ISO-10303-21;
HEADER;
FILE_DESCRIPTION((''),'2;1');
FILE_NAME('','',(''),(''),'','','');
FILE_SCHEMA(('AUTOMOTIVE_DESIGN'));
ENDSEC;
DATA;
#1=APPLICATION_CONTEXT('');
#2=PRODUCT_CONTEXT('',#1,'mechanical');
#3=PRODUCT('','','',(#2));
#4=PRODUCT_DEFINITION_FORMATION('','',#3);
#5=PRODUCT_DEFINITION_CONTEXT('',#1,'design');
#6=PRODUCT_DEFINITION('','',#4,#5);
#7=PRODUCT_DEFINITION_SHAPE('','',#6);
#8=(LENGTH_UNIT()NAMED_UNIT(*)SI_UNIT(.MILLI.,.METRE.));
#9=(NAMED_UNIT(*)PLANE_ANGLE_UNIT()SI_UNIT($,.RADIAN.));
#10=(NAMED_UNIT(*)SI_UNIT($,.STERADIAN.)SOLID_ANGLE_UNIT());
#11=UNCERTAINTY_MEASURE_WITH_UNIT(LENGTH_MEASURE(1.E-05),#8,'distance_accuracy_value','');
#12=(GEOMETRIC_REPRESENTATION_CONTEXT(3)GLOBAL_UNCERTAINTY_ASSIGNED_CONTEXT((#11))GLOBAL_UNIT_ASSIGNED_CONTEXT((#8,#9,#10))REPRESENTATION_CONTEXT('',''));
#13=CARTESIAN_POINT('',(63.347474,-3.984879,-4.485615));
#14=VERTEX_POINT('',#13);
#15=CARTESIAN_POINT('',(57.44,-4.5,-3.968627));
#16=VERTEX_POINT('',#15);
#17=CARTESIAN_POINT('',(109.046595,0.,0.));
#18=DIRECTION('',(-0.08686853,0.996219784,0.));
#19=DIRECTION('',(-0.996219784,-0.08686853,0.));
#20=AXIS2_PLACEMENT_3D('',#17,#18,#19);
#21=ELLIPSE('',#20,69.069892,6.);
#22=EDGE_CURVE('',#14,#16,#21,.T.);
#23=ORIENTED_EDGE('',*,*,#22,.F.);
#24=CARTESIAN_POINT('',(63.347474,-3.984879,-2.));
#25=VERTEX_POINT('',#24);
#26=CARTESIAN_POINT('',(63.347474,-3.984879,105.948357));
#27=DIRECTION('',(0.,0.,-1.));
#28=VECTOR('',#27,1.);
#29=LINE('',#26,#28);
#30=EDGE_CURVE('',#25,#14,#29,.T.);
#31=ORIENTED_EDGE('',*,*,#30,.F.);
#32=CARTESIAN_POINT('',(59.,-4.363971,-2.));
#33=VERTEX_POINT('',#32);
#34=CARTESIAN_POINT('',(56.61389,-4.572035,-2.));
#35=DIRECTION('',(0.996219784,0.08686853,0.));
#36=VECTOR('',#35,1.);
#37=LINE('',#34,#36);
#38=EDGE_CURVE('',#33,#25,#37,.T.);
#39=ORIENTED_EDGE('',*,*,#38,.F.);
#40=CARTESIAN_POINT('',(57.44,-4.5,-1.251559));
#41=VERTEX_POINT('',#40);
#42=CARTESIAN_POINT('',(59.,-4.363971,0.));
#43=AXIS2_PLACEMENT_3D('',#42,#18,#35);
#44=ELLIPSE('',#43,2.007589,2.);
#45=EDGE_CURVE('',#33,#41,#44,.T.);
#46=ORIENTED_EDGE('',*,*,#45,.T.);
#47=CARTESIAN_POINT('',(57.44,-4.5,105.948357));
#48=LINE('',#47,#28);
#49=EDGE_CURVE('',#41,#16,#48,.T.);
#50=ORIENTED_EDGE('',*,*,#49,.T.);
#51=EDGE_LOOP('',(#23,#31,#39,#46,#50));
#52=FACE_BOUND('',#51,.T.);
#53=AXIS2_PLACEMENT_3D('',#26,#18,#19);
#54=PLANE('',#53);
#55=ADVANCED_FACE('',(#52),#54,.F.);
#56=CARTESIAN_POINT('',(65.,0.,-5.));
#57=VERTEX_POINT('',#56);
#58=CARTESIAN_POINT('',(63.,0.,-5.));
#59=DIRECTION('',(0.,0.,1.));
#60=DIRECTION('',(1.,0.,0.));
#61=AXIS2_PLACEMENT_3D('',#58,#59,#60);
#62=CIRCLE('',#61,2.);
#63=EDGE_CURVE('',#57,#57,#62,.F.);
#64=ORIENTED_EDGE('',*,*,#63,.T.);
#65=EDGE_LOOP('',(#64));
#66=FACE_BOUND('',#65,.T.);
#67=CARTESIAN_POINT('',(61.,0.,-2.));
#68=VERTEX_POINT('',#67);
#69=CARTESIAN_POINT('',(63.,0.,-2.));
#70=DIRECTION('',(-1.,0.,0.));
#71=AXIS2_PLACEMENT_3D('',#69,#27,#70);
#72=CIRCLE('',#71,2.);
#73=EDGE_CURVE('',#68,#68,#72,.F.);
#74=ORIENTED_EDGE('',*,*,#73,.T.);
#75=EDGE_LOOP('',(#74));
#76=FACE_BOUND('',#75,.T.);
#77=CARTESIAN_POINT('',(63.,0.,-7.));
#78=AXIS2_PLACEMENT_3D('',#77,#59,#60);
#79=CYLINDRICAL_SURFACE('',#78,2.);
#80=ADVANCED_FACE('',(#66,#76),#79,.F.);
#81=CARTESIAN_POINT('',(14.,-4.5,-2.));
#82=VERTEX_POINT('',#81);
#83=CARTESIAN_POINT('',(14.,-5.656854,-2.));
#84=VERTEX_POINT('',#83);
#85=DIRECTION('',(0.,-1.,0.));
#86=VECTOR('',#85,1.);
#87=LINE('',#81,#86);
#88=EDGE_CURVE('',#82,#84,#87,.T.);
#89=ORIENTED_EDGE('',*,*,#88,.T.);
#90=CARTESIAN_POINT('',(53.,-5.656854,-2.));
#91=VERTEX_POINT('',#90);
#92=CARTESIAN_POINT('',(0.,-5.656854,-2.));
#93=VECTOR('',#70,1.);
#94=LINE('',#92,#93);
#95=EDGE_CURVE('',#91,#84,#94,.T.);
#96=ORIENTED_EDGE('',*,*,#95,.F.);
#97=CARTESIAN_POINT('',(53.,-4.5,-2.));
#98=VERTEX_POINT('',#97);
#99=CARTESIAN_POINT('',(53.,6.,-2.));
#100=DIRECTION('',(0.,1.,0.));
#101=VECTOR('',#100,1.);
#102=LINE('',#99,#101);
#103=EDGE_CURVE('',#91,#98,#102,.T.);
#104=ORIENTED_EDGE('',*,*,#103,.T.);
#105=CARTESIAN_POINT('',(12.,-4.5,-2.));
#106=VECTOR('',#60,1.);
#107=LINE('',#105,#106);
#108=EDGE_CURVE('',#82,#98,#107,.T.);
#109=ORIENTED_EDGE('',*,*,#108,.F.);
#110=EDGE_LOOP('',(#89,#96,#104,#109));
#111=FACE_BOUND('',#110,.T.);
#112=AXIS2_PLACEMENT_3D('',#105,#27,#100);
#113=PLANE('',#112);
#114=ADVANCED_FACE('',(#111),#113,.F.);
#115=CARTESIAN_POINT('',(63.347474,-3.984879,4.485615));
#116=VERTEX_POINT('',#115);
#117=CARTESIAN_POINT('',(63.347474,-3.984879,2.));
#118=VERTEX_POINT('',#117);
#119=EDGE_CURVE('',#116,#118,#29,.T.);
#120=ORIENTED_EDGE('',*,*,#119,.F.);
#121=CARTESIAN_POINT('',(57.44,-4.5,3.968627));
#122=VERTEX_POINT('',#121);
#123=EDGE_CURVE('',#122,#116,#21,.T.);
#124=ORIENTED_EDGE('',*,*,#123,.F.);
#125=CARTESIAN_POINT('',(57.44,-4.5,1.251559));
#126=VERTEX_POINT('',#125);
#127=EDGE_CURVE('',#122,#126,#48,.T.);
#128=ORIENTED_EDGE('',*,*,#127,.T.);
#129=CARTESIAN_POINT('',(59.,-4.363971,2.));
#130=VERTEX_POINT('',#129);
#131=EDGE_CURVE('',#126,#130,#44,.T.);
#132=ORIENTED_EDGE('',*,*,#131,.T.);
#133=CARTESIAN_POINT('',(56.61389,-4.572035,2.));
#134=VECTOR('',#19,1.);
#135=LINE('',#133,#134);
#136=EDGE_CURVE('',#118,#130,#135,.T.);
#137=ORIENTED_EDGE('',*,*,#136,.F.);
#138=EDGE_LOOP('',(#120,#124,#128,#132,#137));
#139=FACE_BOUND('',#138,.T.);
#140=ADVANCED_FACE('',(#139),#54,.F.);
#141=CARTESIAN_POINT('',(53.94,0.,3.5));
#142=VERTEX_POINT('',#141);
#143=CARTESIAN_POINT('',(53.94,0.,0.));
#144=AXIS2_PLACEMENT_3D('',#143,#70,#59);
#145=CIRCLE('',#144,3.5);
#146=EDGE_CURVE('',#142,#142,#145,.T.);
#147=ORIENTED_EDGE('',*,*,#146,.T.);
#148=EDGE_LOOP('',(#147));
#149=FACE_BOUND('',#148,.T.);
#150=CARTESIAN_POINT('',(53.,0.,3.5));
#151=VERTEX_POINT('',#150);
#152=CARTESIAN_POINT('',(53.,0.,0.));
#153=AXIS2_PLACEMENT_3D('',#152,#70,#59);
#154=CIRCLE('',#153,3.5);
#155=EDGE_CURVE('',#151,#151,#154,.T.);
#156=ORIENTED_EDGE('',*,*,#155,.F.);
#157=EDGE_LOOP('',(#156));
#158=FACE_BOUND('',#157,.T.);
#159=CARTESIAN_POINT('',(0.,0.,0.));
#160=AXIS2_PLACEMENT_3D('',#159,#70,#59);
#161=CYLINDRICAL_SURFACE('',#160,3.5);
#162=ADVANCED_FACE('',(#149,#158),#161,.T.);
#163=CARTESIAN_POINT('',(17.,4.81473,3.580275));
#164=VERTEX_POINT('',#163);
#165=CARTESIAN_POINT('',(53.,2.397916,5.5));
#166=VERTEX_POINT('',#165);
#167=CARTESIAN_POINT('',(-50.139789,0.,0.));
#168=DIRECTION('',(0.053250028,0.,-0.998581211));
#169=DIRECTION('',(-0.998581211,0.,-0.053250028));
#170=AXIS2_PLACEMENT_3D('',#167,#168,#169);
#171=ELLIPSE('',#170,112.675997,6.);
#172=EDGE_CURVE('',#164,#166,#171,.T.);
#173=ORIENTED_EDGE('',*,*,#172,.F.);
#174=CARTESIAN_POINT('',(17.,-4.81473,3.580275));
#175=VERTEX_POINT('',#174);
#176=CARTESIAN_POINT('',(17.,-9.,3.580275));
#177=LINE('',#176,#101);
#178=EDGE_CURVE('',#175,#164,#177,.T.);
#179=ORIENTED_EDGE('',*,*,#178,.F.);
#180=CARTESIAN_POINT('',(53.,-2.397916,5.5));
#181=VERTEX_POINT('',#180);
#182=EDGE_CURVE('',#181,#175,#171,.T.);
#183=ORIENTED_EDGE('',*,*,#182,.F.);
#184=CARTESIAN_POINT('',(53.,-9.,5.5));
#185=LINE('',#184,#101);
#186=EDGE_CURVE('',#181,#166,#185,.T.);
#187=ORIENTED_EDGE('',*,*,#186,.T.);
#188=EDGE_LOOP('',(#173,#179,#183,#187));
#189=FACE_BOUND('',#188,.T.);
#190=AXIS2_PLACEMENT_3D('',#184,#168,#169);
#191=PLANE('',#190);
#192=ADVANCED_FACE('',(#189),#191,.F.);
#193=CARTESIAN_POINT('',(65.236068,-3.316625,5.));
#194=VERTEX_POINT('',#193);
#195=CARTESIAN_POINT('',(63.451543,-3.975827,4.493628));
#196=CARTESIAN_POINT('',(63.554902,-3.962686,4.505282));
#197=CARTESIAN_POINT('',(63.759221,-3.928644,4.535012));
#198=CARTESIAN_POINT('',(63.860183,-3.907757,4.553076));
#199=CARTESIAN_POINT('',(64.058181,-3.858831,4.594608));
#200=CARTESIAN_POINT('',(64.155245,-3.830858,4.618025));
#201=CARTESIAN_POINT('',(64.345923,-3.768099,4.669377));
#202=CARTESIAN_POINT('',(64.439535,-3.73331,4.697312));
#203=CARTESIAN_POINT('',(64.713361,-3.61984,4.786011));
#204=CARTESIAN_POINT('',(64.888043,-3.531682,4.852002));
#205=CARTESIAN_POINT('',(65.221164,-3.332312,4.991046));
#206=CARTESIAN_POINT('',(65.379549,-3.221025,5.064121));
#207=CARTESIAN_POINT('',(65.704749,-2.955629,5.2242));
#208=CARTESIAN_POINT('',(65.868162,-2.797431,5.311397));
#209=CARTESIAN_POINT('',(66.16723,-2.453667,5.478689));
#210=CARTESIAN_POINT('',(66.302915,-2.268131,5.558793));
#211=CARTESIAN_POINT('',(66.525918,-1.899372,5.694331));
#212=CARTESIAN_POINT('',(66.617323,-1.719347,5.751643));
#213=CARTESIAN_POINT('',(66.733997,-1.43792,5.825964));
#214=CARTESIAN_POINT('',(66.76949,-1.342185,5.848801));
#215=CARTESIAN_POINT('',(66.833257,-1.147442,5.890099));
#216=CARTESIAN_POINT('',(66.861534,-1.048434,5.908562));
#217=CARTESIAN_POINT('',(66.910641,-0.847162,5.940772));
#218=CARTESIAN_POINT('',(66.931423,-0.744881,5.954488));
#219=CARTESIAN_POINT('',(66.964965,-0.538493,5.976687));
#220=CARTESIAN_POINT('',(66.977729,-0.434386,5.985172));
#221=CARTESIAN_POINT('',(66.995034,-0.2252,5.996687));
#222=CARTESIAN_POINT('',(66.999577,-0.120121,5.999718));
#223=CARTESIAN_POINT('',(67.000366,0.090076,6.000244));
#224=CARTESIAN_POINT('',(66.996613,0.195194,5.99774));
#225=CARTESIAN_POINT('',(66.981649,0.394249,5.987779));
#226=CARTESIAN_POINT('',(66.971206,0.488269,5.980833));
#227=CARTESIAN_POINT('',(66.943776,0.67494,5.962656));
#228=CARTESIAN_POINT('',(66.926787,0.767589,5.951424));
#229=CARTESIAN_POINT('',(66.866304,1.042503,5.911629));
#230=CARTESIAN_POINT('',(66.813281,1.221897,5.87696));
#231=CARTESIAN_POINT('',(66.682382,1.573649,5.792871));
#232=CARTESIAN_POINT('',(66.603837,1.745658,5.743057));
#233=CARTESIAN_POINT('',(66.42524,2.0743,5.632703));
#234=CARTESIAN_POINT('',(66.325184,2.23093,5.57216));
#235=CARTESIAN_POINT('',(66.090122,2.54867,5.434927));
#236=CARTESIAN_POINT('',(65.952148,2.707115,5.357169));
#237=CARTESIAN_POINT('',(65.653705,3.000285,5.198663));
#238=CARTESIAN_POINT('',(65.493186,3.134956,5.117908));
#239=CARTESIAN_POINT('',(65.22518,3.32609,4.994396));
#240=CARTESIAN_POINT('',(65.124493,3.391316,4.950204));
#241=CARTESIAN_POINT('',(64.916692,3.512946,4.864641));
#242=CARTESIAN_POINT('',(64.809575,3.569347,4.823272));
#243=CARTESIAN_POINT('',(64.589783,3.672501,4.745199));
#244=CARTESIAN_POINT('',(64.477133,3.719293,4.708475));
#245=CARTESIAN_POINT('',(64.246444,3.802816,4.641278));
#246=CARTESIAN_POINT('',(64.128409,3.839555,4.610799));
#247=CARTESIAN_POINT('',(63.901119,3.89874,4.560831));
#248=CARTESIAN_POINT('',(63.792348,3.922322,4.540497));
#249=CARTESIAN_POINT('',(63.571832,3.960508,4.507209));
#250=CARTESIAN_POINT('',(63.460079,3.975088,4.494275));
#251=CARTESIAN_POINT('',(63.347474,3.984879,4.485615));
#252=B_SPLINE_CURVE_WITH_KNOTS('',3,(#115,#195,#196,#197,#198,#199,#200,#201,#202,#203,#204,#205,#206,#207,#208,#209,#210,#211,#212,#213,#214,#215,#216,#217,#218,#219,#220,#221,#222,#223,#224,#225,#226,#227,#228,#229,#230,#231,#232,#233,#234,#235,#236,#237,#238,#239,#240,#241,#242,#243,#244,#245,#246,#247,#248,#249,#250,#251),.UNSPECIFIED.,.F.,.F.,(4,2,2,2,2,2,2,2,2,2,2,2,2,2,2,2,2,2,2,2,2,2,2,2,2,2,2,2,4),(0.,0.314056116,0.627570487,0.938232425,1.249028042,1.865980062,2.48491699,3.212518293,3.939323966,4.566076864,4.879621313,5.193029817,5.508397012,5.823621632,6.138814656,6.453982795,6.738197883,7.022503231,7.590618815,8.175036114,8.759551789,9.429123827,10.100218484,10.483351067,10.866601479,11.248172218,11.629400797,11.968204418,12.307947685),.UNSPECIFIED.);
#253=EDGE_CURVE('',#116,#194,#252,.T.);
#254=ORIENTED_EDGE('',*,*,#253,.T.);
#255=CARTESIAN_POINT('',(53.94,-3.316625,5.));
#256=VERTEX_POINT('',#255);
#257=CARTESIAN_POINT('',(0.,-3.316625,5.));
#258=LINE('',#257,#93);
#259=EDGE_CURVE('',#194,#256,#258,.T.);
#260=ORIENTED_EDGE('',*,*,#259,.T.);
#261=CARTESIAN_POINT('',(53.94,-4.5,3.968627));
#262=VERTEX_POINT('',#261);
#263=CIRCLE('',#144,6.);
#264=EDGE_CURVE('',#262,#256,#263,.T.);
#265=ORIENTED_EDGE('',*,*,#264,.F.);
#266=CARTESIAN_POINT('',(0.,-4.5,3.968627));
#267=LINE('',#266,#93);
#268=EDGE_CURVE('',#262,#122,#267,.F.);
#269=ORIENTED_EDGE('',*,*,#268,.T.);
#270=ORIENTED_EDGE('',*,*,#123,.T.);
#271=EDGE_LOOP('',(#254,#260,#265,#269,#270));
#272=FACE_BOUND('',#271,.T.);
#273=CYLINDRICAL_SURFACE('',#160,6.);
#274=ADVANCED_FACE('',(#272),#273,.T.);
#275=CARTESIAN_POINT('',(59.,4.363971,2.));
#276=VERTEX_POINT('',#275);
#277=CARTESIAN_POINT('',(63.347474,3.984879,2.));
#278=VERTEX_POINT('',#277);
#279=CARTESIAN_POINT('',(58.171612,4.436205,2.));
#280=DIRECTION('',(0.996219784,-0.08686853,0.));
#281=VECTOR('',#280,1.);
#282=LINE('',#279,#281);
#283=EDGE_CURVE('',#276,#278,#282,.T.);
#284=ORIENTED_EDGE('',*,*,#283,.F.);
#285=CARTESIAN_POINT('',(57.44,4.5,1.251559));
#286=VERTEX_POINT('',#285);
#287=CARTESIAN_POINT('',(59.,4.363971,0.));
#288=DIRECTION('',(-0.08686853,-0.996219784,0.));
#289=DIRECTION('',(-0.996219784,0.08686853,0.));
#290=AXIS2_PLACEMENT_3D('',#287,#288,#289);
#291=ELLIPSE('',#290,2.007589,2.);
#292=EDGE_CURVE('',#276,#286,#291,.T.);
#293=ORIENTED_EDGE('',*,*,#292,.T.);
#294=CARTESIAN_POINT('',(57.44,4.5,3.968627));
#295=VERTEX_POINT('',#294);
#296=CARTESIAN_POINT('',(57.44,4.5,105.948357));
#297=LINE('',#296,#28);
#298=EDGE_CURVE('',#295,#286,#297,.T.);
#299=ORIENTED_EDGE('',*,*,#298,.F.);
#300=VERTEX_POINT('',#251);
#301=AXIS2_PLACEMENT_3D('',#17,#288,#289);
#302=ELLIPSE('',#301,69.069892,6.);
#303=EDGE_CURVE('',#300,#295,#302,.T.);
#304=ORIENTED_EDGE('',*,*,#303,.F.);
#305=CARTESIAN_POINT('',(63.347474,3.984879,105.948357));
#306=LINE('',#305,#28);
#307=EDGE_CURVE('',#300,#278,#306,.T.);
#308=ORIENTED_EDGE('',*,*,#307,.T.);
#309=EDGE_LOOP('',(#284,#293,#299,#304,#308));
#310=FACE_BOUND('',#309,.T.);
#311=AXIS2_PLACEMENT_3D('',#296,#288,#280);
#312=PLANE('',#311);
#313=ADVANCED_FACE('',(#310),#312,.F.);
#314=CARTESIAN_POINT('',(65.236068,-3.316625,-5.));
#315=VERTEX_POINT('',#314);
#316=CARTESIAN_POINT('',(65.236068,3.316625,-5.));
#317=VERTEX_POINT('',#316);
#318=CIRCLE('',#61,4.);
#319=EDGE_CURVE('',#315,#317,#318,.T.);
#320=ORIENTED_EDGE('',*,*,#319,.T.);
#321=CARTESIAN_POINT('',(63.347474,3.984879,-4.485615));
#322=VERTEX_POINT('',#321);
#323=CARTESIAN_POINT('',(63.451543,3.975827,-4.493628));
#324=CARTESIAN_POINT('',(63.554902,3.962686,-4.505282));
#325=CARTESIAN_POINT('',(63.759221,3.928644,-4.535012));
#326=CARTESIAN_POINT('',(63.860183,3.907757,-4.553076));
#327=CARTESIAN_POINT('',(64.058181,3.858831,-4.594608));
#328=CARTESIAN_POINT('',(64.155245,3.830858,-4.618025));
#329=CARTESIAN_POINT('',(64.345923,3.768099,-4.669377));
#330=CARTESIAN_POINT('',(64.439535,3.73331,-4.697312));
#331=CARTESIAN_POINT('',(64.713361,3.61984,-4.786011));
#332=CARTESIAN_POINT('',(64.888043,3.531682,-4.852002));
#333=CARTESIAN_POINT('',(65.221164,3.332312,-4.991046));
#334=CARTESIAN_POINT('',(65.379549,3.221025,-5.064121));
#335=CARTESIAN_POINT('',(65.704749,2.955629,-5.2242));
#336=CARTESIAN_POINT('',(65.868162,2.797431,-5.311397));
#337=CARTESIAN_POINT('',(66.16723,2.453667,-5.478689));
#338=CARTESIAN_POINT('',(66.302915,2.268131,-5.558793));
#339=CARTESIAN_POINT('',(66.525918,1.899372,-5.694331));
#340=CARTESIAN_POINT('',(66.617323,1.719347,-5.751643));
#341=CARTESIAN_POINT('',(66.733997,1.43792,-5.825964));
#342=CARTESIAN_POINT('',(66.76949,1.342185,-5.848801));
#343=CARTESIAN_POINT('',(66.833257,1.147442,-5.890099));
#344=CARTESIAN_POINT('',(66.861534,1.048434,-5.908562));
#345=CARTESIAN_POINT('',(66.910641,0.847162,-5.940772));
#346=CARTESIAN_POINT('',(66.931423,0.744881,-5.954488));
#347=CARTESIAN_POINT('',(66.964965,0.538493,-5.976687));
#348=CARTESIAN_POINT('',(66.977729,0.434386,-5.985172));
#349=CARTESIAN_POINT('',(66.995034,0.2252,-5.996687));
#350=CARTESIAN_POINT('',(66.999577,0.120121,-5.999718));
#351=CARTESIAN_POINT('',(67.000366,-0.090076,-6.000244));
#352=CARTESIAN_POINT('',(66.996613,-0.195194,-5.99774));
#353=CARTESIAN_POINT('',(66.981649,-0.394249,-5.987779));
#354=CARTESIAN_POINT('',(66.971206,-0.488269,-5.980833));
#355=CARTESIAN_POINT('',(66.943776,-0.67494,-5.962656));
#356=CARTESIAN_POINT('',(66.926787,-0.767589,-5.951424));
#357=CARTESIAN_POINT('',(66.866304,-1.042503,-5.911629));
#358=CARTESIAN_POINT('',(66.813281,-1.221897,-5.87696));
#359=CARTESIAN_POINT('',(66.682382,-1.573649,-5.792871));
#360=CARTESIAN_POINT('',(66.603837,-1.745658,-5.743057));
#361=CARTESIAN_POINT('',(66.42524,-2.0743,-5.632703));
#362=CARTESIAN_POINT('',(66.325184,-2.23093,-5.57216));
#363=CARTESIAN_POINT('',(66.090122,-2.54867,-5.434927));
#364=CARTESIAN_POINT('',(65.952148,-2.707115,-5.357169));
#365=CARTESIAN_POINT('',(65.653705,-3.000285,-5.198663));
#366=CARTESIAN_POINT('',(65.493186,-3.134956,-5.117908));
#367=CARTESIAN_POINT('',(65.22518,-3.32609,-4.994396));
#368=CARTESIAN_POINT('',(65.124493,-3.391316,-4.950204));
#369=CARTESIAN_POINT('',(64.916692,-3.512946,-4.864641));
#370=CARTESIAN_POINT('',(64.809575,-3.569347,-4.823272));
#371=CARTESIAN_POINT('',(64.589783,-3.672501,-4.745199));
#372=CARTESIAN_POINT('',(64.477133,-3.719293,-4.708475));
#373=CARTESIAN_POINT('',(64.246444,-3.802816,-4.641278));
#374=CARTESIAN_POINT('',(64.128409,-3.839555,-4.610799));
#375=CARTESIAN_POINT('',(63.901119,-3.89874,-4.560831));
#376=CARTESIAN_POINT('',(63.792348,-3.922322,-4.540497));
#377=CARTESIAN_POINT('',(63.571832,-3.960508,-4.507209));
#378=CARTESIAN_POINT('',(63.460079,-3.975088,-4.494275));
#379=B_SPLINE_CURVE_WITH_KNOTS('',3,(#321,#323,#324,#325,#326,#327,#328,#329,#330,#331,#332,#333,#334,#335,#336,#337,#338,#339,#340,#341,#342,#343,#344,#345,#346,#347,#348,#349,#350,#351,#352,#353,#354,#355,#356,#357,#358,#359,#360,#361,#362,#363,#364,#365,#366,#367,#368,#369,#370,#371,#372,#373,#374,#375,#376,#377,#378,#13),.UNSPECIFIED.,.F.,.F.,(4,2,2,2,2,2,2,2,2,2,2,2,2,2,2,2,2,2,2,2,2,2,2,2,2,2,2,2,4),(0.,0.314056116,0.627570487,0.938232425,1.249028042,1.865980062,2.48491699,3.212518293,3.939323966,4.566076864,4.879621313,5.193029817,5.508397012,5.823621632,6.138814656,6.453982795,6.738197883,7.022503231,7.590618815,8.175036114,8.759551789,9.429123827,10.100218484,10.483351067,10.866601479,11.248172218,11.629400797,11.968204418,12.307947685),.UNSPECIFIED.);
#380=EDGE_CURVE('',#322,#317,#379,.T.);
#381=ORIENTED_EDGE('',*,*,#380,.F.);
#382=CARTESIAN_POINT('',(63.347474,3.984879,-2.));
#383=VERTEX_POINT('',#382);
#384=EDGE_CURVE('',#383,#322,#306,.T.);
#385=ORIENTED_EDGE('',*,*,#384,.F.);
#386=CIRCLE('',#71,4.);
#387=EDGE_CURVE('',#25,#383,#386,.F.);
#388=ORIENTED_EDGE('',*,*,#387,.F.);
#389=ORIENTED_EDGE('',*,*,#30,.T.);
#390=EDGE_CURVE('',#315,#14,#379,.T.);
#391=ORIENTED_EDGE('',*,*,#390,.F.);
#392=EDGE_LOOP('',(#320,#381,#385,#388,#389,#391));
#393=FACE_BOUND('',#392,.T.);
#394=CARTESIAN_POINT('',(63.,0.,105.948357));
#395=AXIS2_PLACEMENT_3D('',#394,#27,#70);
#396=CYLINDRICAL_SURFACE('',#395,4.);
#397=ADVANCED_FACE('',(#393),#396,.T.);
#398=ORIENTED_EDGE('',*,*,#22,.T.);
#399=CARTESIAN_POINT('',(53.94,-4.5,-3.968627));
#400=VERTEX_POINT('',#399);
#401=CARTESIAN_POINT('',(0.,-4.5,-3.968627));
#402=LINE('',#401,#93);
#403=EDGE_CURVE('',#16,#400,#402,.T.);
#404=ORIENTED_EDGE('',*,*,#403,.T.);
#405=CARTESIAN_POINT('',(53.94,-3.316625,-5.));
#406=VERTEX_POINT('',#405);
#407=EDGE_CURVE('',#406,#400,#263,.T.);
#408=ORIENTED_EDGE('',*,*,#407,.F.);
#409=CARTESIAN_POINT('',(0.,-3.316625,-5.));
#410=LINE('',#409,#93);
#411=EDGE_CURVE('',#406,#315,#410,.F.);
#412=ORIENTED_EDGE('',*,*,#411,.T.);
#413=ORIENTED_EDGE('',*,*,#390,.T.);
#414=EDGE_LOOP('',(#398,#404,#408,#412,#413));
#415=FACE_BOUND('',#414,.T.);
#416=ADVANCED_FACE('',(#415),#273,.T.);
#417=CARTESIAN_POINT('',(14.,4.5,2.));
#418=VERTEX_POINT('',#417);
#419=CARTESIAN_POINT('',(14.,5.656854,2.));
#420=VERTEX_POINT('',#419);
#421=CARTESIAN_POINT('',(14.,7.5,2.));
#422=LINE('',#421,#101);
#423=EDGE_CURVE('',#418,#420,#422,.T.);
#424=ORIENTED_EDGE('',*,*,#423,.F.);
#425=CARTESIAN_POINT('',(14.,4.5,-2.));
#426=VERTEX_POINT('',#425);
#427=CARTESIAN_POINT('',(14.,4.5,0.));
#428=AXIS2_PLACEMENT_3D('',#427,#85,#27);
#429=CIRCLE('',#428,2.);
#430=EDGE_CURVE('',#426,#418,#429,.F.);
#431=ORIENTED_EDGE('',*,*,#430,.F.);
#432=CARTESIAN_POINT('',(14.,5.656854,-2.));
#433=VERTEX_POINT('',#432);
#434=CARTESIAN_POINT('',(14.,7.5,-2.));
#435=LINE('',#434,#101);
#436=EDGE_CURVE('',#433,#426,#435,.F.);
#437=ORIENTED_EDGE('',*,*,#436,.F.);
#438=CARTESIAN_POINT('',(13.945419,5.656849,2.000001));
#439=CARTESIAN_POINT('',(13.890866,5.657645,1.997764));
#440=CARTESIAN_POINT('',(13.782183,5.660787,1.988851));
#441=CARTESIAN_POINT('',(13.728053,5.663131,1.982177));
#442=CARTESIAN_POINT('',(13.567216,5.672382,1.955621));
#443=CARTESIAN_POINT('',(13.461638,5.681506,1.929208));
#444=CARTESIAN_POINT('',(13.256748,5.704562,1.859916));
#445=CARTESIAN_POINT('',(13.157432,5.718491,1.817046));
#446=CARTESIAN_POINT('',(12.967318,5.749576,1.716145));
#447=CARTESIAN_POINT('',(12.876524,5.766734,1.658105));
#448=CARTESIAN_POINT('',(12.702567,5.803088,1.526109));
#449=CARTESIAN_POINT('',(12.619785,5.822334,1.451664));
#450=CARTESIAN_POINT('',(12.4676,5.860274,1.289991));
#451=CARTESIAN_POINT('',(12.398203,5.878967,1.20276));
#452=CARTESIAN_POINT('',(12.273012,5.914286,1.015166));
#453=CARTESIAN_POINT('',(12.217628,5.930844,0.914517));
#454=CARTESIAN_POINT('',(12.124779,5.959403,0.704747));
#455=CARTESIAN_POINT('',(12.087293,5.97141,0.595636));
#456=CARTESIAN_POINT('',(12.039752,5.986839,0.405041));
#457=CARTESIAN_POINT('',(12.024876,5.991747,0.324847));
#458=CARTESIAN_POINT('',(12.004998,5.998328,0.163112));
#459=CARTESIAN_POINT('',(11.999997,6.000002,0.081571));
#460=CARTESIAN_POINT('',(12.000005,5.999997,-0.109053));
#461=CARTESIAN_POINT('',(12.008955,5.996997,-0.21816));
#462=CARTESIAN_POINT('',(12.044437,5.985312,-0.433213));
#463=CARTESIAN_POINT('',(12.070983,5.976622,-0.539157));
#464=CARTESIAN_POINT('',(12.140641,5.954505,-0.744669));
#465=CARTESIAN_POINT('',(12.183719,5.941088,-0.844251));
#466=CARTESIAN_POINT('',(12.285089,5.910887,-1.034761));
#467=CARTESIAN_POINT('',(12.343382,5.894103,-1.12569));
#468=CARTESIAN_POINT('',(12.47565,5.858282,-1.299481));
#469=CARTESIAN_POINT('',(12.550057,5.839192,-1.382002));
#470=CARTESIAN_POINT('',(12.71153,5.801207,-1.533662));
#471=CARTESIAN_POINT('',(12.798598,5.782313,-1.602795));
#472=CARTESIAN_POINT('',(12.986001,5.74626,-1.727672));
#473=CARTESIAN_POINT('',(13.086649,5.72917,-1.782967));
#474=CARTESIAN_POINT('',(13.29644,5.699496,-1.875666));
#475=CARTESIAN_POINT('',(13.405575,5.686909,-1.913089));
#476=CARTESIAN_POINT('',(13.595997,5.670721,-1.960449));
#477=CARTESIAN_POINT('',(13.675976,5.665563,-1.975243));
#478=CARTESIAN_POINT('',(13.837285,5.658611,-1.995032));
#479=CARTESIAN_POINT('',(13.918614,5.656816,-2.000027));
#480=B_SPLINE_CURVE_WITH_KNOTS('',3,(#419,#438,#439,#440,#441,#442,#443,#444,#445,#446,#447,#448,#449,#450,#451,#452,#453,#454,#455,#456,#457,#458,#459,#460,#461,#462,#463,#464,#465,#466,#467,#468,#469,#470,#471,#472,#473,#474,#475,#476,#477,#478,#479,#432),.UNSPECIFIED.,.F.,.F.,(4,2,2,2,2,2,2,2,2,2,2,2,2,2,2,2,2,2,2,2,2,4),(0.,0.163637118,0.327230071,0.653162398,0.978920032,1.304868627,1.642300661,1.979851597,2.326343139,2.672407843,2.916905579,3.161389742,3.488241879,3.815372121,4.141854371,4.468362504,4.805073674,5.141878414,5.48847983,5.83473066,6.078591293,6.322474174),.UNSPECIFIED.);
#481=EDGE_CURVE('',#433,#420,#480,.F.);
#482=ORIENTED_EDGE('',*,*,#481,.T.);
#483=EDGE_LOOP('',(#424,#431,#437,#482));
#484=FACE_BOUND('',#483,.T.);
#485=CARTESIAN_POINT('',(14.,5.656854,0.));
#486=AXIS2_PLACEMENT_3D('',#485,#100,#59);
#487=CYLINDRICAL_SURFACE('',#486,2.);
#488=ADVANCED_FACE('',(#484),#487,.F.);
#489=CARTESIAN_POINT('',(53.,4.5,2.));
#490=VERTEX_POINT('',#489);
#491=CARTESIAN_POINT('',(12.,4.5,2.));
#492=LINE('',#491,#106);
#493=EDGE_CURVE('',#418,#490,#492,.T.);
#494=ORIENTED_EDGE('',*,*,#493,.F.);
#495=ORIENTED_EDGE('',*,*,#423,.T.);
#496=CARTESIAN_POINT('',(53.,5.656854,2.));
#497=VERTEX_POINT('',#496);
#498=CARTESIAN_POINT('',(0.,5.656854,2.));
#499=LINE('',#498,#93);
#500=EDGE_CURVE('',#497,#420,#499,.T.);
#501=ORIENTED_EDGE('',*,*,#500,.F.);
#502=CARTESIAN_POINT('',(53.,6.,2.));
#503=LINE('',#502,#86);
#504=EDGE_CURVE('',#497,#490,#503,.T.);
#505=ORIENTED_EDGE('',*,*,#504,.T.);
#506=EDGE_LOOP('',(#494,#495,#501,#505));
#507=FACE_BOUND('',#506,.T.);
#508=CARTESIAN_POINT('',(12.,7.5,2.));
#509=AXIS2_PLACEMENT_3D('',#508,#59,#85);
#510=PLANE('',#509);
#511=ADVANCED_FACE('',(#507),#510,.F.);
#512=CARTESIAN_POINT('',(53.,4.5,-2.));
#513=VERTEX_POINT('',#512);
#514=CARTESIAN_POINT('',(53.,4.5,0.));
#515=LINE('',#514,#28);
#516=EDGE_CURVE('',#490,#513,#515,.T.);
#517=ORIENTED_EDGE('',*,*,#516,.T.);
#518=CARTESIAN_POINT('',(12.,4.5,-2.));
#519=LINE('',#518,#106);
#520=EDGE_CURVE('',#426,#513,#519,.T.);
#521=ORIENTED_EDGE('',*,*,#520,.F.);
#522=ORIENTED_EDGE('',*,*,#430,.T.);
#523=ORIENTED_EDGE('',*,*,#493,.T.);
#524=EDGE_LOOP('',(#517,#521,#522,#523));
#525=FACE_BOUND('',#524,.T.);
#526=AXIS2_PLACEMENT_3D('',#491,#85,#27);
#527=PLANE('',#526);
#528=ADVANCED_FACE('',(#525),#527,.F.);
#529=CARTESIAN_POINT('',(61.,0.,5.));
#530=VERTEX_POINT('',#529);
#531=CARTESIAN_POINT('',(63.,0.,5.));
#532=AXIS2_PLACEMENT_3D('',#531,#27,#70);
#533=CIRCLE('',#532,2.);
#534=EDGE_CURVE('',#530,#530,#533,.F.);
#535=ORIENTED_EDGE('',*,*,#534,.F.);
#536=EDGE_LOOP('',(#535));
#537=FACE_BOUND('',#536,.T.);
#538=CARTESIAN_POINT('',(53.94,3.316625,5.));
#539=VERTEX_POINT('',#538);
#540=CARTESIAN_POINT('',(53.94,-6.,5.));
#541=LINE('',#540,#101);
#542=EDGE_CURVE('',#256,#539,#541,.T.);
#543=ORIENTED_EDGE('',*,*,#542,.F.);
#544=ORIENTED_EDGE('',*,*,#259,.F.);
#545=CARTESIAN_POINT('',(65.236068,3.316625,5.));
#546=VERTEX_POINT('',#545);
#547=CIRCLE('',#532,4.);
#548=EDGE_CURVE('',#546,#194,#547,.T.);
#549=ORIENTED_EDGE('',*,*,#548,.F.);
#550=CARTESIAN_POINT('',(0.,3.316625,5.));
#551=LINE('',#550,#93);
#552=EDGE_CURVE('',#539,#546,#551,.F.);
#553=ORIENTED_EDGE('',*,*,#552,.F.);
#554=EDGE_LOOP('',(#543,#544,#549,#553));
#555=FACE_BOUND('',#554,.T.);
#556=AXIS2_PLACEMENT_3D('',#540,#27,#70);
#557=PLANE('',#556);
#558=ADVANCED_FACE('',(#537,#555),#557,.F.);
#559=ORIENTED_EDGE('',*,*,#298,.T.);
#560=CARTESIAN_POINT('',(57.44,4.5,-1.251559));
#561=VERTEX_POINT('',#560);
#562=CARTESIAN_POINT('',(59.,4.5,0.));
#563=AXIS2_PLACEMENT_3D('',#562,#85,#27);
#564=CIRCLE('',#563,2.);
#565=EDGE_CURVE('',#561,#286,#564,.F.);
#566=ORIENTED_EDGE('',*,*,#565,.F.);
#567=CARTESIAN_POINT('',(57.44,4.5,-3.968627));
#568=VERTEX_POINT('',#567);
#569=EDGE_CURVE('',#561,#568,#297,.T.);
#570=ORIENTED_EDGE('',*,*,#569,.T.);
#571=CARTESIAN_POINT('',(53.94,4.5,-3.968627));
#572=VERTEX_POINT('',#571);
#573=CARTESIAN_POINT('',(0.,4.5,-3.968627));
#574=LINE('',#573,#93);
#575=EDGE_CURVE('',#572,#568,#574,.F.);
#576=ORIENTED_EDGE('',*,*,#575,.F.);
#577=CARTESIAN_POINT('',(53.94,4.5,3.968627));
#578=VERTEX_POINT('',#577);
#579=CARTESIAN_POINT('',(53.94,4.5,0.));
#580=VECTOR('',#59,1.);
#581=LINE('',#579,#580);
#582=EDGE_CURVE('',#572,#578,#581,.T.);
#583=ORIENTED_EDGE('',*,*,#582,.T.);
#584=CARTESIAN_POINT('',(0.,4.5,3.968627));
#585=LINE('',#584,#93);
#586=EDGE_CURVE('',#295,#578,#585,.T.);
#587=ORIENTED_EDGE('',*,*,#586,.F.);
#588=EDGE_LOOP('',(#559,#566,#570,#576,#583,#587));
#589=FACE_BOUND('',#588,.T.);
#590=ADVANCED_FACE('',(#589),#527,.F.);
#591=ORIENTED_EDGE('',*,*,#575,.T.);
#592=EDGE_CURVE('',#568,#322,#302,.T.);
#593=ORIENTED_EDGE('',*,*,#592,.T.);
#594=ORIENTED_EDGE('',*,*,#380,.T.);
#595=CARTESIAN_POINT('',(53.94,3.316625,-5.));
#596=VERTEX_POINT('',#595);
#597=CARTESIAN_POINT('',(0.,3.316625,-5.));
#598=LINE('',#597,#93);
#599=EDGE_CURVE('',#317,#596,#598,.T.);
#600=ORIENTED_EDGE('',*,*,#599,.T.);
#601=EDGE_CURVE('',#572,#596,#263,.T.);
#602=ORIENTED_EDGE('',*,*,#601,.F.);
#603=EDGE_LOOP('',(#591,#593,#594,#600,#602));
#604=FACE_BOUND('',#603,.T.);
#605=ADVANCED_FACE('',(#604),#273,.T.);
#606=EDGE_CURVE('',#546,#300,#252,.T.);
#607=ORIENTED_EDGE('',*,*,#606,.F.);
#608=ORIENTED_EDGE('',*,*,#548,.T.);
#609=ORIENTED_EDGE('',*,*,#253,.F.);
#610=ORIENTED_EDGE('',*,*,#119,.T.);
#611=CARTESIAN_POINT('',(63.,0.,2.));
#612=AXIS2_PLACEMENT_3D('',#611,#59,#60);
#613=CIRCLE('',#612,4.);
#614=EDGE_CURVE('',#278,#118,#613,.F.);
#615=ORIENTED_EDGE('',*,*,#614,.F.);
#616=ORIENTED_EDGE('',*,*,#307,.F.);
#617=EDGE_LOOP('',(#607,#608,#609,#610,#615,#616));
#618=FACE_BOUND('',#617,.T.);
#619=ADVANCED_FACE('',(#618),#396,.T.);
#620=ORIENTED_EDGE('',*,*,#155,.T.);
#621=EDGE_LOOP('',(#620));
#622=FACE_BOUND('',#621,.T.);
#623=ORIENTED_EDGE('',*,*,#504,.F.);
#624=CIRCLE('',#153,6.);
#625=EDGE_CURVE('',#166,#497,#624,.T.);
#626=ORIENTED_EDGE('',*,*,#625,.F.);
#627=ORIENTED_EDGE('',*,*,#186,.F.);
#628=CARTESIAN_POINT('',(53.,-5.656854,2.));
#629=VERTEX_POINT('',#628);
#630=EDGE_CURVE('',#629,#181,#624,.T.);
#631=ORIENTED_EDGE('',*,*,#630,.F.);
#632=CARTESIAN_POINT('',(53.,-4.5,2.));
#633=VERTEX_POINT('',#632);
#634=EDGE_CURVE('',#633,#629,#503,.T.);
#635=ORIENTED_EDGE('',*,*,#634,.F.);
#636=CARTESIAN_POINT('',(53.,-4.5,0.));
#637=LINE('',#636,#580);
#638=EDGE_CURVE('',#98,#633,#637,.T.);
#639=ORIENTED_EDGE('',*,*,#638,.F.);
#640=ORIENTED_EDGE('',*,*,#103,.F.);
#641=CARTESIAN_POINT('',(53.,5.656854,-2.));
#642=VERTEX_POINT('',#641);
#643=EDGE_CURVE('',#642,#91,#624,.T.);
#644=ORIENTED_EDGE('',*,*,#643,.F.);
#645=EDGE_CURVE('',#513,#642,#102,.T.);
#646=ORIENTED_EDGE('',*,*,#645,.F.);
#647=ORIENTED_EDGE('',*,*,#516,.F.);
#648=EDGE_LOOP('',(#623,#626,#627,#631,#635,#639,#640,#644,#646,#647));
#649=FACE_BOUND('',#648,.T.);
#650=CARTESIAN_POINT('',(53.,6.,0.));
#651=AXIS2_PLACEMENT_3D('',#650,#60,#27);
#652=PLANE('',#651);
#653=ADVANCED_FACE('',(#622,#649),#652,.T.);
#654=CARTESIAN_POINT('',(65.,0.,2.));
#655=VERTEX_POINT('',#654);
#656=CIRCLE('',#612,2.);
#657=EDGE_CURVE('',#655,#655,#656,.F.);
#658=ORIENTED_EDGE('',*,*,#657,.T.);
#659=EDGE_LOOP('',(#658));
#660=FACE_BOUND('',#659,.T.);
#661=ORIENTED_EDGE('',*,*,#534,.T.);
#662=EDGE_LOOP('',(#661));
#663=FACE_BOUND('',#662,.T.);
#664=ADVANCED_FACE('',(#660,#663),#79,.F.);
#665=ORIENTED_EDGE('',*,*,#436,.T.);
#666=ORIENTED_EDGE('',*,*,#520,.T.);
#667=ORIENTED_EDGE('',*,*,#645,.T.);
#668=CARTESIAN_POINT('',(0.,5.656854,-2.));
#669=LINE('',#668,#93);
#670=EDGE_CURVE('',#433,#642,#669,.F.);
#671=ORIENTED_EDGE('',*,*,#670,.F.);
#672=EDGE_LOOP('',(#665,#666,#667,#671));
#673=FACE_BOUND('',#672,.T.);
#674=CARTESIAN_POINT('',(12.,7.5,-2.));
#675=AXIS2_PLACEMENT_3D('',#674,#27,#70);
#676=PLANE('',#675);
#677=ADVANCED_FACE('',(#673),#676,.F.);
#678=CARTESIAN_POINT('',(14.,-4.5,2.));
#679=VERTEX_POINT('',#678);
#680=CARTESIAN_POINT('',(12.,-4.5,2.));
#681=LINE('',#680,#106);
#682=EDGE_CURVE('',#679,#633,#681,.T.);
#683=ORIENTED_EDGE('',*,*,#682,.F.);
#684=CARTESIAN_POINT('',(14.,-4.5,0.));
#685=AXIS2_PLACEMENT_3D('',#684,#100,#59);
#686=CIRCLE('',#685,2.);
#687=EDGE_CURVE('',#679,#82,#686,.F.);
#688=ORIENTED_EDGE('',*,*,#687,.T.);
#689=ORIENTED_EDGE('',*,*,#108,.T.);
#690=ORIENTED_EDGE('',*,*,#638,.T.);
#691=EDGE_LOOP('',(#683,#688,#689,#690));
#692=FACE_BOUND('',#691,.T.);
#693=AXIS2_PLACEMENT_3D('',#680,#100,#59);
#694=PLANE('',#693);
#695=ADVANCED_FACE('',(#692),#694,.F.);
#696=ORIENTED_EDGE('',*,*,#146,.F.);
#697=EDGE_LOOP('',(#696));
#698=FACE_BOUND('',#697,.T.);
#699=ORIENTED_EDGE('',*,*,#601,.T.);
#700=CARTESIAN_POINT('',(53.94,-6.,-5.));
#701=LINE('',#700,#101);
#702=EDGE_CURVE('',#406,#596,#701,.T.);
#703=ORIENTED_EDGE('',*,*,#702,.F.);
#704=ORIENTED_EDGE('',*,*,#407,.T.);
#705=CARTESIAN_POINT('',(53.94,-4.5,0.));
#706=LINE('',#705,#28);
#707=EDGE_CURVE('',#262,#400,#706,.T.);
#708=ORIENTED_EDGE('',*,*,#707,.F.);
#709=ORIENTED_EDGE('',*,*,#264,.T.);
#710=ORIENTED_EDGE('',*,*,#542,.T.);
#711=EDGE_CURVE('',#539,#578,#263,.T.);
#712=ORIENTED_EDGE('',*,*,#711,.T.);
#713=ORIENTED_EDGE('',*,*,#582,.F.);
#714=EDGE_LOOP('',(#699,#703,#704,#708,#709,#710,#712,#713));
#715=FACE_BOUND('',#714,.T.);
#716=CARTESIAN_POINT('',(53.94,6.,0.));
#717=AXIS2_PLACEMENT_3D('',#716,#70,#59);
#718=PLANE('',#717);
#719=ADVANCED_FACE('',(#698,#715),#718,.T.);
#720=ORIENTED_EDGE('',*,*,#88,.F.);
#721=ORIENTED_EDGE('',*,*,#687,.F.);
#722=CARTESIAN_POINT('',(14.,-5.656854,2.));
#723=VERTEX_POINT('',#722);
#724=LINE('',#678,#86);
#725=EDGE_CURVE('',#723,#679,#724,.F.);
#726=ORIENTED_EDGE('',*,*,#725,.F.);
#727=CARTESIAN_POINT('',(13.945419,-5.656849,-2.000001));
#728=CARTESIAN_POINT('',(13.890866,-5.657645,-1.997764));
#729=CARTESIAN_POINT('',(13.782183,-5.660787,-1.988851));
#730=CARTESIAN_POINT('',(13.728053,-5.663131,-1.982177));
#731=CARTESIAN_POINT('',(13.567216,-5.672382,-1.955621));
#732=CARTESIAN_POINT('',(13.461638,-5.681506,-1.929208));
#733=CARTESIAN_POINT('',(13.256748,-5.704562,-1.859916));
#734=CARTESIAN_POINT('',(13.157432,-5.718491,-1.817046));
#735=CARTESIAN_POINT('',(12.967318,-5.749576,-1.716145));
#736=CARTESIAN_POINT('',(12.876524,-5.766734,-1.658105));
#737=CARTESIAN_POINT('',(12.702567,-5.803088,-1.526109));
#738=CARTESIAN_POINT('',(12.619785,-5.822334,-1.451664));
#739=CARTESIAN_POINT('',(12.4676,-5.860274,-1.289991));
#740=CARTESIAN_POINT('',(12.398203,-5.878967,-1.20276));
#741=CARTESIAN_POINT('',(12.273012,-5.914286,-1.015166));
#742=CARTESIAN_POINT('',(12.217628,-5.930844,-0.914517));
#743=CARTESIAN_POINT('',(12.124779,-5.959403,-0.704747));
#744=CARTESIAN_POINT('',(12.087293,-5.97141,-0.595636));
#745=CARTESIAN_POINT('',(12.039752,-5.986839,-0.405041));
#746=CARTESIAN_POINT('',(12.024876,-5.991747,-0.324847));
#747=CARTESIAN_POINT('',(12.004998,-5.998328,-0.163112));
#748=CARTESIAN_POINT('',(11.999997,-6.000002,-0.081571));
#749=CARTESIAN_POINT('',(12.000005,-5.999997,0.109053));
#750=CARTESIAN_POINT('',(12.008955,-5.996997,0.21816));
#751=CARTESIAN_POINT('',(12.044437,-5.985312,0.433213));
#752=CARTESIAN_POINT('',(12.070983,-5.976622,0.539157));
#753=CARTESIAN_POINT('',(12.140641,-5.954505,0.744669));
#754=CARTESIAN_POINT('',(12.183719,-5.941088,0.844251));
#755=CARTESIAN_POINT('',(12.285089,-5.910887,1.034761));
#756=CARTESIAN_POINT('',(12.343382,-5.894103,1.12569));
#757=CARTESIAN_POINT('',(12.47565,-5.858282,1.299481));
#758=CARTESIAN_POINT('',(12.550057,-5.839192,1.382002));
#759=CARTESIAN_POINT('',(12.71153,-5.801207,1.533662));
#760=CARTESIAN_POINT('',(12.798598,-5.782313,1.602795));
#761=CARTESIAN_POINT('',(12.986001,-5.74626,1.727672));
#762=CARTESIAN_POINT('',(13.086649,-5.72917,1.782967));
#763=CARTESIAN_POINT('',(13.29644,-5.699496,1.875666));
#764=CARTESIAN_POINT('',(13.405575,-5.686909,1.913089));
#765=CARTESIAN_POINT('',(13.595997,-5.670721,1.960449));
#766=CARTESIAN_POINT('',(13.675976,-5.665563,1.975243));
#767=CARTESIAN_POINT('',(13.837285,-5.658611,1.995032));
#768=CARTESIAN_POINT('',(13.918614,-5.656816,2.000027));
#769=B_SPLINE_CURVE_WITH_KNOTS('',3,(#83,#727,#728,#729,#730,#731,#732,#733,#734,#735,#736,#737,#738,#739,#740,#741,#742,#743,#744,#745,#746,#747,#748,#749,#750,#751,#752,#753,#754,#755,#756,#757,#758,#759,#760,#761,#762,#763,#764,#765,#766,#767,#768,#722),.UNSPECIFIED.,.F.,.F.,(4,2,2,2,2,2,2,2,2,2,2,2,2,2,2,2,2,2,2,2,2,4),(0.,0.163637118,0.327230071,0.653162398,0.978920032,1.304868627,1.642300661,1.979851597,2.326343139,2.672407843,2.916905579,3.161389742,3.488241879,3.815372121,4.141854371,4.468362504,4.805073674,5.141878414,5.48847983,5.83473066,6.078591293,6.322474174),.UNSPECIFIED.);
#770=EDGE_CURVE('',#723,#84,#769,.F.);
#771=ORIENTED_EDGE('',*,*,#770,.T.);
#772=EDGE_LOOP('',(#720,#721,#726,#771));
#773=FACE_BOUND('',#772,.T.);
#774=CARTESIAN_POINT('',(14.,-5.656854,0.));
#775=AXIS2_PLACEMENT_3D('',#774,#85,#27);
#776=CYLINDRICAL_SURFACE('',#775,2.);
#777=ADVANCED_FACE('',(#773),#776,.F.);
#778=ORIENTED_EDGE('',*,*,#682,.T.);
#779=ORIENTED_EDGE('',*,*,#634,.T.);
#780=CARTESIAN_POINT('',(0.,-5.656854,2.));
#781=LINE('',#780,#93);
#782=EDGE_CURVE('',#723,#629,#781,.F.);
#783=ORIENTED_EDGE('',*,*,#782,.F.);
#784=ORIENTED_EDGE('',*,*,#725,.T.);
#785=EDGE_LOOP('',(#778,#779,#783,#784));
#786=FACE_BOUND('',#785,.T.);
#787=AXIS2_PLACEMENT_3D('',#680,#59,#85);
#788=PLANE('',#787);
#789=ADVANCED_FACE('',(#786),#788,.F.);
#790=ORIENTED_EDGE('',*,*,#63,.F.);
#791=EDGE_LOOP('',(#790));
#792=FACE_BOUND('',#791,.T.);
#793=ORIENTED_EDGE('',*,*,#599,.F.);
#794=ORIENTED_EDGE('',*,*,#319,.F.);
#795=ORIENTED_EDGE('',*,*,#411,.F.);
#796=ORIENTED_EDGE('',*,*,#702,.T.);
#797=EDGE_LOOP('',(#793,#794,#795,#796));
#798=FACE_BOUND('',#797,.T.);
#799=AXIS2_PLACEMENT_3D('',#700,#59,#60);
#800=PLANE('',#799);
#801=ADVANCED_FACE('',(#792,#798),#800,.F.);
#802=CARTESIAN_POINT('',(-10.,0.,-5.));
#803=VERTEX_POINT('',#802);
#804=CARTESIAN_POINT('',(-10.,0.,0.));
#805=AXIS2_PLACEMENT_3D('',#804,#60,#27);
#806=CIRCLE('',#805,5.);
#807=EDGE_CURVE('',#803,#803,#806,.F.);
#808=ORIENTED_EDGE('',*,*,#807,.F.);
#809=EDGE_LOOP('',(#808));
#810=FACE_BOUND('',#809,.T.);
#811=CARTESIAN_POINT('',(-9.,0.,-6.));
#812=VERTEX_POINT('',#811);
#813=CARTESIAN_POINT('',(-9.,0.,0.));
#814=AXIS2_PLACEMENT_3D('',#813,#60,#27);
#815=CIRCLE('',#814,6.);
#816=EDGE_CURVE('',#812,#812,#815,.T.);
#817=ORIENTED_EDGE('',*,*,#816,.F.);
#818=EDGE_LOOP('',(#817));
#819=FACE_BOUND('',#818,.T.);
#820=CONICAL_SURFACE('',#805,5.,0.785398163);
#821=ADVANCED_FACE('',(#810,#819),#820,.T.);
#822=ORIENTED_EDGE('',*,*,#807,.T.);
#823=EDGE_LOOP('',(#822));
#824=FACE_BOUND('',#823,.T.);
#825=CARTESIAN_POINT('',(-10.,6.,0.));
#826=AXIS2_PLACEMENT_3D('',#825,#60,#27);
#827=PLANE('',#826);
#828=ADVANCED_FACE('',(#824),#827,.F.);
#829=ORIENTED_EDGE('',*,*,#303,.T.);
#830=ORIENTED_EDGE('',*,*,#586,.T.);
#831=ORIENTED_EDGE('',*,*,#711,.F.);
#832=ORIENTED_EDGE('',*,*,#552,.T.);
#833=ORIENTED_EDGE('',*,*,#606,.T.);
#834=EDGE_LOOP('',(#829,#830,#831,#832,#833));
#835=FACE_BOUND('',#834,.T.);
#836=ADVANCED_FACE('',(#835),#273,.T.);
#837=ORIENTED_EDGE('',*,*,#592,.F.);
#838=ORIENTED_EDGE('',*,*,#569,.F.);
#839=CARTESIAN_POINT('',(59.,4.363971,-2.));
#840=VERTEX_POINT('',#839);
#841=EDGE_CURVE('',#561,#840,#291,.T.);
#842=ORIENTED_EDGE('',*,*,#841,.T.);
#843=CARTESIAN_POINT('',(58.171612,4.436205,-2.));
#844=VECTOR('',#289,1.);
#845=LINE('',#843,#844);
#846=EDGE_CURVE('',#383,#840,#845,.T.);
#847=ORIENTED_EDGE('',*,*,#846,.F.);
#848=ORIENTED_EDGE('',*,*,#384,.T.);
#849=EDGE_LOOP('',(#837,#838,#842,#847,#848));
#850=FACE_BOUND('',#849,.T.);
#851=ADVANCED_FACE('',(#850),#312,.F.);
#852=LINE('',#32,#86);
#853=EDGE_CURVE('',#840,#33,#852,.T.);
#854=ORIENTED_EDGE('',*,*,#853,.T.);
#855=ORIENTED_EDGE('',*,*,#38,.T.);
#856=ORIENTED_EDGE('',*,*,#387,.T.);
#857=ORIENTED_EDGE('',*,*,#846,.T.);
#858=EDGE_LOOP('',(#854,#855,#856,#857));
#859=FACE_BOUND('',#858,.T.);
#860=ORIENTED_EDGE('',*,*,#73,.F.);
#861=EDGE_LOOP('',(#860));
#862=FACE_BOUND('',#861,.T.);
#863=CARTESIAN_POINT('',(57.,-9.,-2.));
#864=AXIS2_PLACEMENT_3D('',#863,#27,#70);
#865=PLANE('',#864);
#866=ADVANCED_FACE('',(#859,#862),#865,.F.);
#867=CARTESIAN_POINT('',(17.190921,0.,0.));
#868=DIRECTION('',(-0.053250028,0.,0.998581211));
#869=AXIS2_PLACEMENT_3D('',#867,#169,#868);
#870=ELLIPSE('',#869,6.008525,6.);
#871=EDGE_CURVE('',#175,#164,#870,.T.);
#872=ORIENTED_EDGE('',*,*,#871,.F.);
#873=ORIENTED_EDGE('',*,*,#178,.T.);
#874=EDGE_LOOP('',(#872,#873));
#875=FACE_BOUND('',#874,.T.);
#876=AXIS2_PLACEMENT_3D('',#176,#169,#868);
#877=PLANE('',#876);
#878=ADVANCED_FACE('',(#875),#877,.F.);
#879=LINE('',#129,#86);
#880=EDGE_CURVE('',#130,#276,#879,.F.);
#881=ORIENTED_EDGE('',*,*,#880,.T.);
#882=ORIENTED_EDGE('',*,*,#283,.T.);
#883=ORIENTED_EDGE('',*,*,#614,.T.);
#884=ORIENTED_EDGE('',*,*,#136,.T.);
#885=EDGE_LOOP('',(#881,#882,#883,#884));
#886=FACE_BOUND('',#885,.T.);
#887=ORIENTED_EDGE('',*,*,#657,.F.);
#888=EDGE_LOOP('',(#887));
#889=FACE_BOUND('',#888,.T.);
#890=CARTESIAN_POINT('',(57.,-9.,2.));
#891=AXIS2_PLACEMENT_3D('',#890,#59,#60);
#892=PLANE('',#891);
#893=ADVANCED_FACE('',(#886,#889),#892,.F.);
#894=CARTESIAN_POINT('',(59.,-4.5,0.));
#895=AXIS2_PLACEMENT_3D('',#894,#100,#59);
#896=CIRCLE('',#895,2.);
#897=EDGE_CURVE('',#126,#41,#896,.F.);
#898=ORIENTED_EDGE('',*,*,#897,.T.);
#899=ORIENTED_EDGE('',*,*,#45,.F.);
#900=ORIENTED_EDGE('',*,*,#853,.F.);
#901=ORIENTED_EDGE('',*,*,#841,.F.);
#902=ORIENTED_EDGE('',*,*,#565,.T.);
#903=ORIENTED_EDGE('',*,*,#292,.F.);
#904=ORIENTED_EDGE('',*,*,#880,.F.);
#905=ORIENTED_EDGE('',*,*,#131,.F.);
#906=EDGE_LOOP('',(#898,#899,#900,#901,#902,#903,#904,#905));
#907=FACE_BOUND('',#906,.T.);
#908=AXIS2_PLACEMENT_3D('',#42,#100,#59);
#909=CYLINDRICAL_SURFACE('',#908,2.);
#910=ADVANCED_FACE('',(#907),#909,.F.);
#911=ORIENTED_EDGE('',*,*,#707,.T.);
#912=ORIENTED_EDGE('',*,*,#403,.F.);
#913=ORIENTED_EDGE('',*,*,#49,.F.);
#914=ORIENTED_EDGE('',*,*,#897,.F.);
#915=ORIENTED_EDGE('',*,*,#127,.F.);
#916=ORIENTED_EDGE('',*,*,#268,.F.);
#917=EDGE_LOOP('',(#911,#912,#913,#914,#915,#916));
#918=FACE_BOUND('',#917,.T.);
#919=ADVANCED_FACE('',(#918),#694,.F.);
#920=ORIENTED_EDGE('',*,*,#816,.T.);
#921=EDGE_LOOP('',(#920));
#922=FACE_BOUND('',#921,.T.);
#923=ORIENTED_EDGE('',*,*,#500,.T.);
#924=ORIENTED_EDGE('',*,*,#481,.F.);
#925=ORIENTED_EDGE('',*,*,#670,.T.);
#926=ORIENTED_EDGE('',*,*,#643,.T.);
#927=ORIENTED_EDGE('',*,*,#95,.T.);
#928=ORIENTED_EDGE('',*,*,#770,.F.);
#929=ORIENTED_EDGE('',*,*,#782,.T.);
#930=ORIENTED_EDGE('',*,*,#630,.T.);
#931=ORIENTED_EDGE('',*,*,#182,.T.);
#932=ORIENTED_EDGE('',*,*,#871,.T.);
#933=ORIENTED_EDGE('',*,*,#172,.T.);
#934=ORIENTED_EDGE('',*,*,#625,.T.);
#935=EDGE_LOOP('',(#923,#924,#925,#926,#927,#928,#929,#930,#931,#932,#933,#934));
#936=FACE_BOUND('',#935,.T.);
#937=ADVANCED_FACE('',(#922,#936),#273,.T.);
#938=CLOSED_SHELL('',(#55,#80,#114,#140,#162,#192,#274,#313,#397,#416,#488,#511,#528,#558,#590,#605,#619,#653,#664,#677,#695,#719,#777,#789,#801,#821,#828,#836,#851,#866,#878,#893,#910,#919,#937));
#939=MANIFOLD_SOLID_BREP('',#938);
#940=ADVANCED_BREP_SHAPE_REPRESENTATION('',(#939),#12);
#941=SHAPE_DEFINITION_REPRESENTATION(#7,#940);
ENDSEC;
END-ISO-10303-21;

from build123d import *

# Parameters (mm, degrees)
SKIZZE1_W                            = 63
SKIZZE1_H                            = 6
SKIZZE2_W                            = 18
SKIZZE2_H                            = 14
AUFSATZ_LINEAR_AUSTRAGEN1_DEPTH      = 9
SCHNITT_LINEAR_AUSTRAGEN1_DEPTH      = 72.909665553
SCHNITT_LINEAR_AUSTRAGEN1_DEPTH_BACK = 72.909665553
SKIZZE3_R                            = 2
SCHNITT_LINEAR_AUSTRAGEN2_DEPTH      = 72.909665553
SCHNITT_LINEAR_AUSTRAGEN2_DEPTH_BACK = 72.909665553
SKIZZE4_W                            = 15
SKIZZE4_H                            = 4
SCHNITT_LINEAR_AUSTRAGEN4_DEPTH      = 72.909665553
SCHNITT_LINEAR_AUSTRAGEN4_DEPTH_BACK = 72.909665553
SCHNITT_LINEAR_AUSTRAGEN5_DEPTH      = 5
SCHNITT_LINEAR_AUSTRAGEN5_DEPTH_BACK = 65.02343321
SKIZZE9_OUTSIDE_W                    = 32.83
SKIZZE9_OUTSIDE_H                    = 36.83
SKIZZE9_OUTSIDE_R                    = 6
SKIZZE11_W                           = 0.94
SKIZZE11_H                           = 2.5
SKIZZE14_W                           = 4
SKIZZE14_H                           = 3
SCHNITT_LINEAR_AUSTRAGEN7_DEPTH      = 45
FASE1_SIZE                           = 1
SCHNITT_LINEAR_START                 = -6.0000001
SCHNITT_LINEAR_AUSTRAGEN8_DEPTH      = 12.0000001
SCHNITT_LINEAR_AUSTRAGEN9_DEPTH      = 68.535176128
SCHNITT_LINEAR_AUSTRAGEN9_DEPTH_BACK = 68.535176128
SKIZZE16_W                           = 13.06
SKIZZE16_H                           = 1
VERRUNDUNG2_R                        = 2
VERRUNDUNG3_R                        = 2
VERRUNDUNG4_R                        = 2


with BuildPart() as part:
    # Skizze1 → Rotation1 (revolve)
    with BuildSketch(Plane.XY, mode=Mode.PRIVATE) as rotation1_sk:
        with Locations((21.5, 3)):
            Rectangle(SKIZZE1_W, SKIZZE1_H)
    revolve(rotation1_sk.sketch.rotate(Axis((0, 0, 0), (1, 0, 0)), 90), axis=Axis((0, 0, 0), (1, 0, 0)))

    # Skizze2 → Aufsatz-Linear austragen1 (add, symmetric)
    with BuildSketch(Plane(origin=(0, 0, 0), x_dir=(1, 0, 0), z_dir=(0, 1, 0))):
        with Locations((62, 0)):
            Rectangle(SKIZZE2_W, SKIZZE2_H)
    extrude(amount=AUFSATZ_LINEAR_AUSTRAGEN1_DEPTH, both=True)

    # Skizze3 → Schnitt-Linear austragen1 (cut, two sides: drawn at the far end of the back side and taken through both)
    with BuildSketch(Plane.XY.offset(-SCHNITT_LINEAR_AUSTRAGEN1_DEPTH_BACK)):
        with Locations((63, 0)):
            Circle(SKIZZE3_R)
    extrude(amount=SCHNITT_LINEAR_AUSTRAGEN1_DEPTH + SCHNITT_LINEAR_AUSTRAGEN1_DEPTH_BACK, mode=Mode.SUBTRACT)

    # Skizze4 → Schnitt-Linear austragen2 (cut, two sides: drawn at the far end of the back side and taken through both)
    with BuildSketch(Plane(origin=(0, 0, 0), x_dir=(1, 0, 0), z_dir=(0, 1, 0)).offset(-SCHNITT_LINEAR_AUSTRAGEN2_DEPTH_BACK)):
        with Locations((64.5, 0)):
            Rectangle(SKIZZE4_W, SKIZZE4_H)
    extrude(amount=SCHNITT_LINEAR_AUSTRAGEN2_DEPTH + SCHNITT_LINEAR_AUSTRAGEN2_DEPTH_BACK, mode=Mode.SUBTRACT)

    # Skizze7 → Schnitt-Linear austragen4 (cut, two sides: drawn at the far end of the back side and taken through both)
    with BuildSketch(Plane(origin=(0, 0, 0), x_dir=(1, 0, 0), z_dir=(0, 1, 0)).offset(-SCHNITT_LINEAR_AUSTRAGEN4_DEPTH_BACK)):
        Polygon((53, -5.5), (17, -3.580275313), (16.870966522, -6), (53, -6), align=None)
    extrude(amount=SCHNITT_LINEAR_AUSTRAGEN4_DEPTH + SCHNITT_LINEAR_AUSTRAGEN4_DEPTH_BACK, mode=Mode.SUBTRACT)

    # Skizze9 outside → Schnitt-Linear austragen5 (cut, two sides: drawn at the far end of the back side and taken through both)
    with BuildSketch(Plane.ZY.offset(-53).offset(-SCHNITT_LINEAR_AUSTRAGEN5_DEPTH_BACK)):
        Rectangle(SKIZZE9_OUTSIDE_W, SKIZZE9_OUTSIDE_H)
        Circle(SKIZZE9_OUTSIDE_R, mode=Mode.SUBTRACT)
    extrude(amount=SCHNITT_LINEAR_AUSTRAGEN5_DEPTH + SCHNITT_LINEAR_AUSTRAGEN5_DEPTH_BACK, mode=Mode.SUBTRACT)

    # Skizze11 → Schnitt-Rotation1 (revolve, cut)
    with BuildSketch(Plane.XY, mode=Mode.PRIVATE) as schnitt_rotation1_sk:
        with Locations((53.47, 4.75)):
            Rectangle(SKIZZE11_W, SKIZZE11_H)
    revolve(schnitt_rotation1_sk.sketch.rotate(Axis((0, 0, 0), (1, 0, 0)), 90), axis=Axis((0, 0, 0), (1, 0, 0)), mode=Mode.SUBTRACT)

    # Skizze14 → Schnitt-Linear austragen7 (cut)
    with BuildSketch(Plane(origin=(57, 0, 0), x_dir=(0, 0, -1), z_dir=(1, 0, 0))):
        with Locations((0, 6)):
            Rectangle(SKIZZE14_W, SKIZZE14_H)
        with Locations((0, -6)):
            Rectangle(SKIZZE14_W, SKIZZE14_H)
    extrude(amount=-SCHNITT_LINEAR_AUSTRAGEN7_DEPTH, mode=Mode.SUBTRACT)

    # Fase1
    fase1_edges = [part.edges().sort_by_distance(p)[0] for p in [
        (-10, 0, -6),
    ]]
    chamfer(fase1_edges, length=FASE1_SIZE)

    # Schnitt-Linear austragen8: read off the stored shape, not the designer's step
    # Schnitt-Linear austragen8 outline → Schnitt-Linear austragen8 (cut)
    with BuildSketch(Plane.XY.offset(SCHNITT_LINEAR_START)):
        with BuildLine():
            Line((53.94, 7), (53.94, 4.5))
            Line((53.94, 4.5), (57.44, 4.5))
            Line((57.44, 4.5), (63.347474122, 3.984879137))
            ThreePointArc((63.347474122, 3.984879137), (67, 0), (63.347474122, -3.984879137))
            Line((63.347474122, -3.984879137), (57.44, -4.5))
            Line((57.44, -4.5), (53.94, -4.5))
            Line((53.94, -4.5), (53.94, -7))
            Line((53.94, -7), (72, -7))
            Line((72, -7), (72, 7))
            Line((72, 7), (53.94, 7))
        make_face()
    extrude(amount=SCHNITT_LINEAR_AUSTRAGEN8_DEPTH, mode=Mode.SUBTRACT)

    # Skizze16 → Schnitt-Linear austragen9 (cut, two sides: drawn at the far end of the back side and taken through both)
    with BuildSketch(Plane(origin=(0, 0, 0), x_dir=(1, 0, 0), z_dir=(0, 1, 0)).offset(-SCHNITT_LINEAR_AUSTRAGEN9_DEPTH_BACK)):
        with Locations((60.47, 5.5)):
            Rectangle(SKIZZE16_W, SKIZZE16_H)
        with Locations((60.47, -5.5)):
            Rectangle(SKIZZE16_W, SKIZZE16_H)
    extrude(amount=SCHNITT_LINEAR_AUSTRAGEN9_DEPTH + SCHNITT_LINEAR_AUSTRAGEN9_DEPTH_BACK, mode=Mode.SUBTRACT)

    # Verrundung2
    verrundung2_edges = [part.edges().sort_by_distance(p)[0] for p in [
        (12, 5.078427125, 2),
        (12, 5.078427125, -2),
    ]]
    fillet(verrundung2_edges, radius=VERRUNDUNG2_R - 0.0001)  # a hair under: the kernel refuses the full size

    # Verrundung3
    verrundung3_edges = [part.edges().sort_by_distance(p)[0] for p in [
        (12, -5.078427125, 2),
        (12, -5.078427125, -2),
    ]]
    fillet(verrundung3_edges, radius=VERRUNDUNG3_R - 0.0001)  # a hair under: the kernel refuses the full size

    # Verrundung4
    verrundung4_edges = [part.edges().sort_by_distance(p)[0] for p in [
        (57, 0, -2),
        (57, 0, 2),
    ]]
    fillet(verrundung4_edges, radius=VERRUNDUNG4_R - 0.0001)  # a hair under: the kernel refuses the full size


solid = part.part
